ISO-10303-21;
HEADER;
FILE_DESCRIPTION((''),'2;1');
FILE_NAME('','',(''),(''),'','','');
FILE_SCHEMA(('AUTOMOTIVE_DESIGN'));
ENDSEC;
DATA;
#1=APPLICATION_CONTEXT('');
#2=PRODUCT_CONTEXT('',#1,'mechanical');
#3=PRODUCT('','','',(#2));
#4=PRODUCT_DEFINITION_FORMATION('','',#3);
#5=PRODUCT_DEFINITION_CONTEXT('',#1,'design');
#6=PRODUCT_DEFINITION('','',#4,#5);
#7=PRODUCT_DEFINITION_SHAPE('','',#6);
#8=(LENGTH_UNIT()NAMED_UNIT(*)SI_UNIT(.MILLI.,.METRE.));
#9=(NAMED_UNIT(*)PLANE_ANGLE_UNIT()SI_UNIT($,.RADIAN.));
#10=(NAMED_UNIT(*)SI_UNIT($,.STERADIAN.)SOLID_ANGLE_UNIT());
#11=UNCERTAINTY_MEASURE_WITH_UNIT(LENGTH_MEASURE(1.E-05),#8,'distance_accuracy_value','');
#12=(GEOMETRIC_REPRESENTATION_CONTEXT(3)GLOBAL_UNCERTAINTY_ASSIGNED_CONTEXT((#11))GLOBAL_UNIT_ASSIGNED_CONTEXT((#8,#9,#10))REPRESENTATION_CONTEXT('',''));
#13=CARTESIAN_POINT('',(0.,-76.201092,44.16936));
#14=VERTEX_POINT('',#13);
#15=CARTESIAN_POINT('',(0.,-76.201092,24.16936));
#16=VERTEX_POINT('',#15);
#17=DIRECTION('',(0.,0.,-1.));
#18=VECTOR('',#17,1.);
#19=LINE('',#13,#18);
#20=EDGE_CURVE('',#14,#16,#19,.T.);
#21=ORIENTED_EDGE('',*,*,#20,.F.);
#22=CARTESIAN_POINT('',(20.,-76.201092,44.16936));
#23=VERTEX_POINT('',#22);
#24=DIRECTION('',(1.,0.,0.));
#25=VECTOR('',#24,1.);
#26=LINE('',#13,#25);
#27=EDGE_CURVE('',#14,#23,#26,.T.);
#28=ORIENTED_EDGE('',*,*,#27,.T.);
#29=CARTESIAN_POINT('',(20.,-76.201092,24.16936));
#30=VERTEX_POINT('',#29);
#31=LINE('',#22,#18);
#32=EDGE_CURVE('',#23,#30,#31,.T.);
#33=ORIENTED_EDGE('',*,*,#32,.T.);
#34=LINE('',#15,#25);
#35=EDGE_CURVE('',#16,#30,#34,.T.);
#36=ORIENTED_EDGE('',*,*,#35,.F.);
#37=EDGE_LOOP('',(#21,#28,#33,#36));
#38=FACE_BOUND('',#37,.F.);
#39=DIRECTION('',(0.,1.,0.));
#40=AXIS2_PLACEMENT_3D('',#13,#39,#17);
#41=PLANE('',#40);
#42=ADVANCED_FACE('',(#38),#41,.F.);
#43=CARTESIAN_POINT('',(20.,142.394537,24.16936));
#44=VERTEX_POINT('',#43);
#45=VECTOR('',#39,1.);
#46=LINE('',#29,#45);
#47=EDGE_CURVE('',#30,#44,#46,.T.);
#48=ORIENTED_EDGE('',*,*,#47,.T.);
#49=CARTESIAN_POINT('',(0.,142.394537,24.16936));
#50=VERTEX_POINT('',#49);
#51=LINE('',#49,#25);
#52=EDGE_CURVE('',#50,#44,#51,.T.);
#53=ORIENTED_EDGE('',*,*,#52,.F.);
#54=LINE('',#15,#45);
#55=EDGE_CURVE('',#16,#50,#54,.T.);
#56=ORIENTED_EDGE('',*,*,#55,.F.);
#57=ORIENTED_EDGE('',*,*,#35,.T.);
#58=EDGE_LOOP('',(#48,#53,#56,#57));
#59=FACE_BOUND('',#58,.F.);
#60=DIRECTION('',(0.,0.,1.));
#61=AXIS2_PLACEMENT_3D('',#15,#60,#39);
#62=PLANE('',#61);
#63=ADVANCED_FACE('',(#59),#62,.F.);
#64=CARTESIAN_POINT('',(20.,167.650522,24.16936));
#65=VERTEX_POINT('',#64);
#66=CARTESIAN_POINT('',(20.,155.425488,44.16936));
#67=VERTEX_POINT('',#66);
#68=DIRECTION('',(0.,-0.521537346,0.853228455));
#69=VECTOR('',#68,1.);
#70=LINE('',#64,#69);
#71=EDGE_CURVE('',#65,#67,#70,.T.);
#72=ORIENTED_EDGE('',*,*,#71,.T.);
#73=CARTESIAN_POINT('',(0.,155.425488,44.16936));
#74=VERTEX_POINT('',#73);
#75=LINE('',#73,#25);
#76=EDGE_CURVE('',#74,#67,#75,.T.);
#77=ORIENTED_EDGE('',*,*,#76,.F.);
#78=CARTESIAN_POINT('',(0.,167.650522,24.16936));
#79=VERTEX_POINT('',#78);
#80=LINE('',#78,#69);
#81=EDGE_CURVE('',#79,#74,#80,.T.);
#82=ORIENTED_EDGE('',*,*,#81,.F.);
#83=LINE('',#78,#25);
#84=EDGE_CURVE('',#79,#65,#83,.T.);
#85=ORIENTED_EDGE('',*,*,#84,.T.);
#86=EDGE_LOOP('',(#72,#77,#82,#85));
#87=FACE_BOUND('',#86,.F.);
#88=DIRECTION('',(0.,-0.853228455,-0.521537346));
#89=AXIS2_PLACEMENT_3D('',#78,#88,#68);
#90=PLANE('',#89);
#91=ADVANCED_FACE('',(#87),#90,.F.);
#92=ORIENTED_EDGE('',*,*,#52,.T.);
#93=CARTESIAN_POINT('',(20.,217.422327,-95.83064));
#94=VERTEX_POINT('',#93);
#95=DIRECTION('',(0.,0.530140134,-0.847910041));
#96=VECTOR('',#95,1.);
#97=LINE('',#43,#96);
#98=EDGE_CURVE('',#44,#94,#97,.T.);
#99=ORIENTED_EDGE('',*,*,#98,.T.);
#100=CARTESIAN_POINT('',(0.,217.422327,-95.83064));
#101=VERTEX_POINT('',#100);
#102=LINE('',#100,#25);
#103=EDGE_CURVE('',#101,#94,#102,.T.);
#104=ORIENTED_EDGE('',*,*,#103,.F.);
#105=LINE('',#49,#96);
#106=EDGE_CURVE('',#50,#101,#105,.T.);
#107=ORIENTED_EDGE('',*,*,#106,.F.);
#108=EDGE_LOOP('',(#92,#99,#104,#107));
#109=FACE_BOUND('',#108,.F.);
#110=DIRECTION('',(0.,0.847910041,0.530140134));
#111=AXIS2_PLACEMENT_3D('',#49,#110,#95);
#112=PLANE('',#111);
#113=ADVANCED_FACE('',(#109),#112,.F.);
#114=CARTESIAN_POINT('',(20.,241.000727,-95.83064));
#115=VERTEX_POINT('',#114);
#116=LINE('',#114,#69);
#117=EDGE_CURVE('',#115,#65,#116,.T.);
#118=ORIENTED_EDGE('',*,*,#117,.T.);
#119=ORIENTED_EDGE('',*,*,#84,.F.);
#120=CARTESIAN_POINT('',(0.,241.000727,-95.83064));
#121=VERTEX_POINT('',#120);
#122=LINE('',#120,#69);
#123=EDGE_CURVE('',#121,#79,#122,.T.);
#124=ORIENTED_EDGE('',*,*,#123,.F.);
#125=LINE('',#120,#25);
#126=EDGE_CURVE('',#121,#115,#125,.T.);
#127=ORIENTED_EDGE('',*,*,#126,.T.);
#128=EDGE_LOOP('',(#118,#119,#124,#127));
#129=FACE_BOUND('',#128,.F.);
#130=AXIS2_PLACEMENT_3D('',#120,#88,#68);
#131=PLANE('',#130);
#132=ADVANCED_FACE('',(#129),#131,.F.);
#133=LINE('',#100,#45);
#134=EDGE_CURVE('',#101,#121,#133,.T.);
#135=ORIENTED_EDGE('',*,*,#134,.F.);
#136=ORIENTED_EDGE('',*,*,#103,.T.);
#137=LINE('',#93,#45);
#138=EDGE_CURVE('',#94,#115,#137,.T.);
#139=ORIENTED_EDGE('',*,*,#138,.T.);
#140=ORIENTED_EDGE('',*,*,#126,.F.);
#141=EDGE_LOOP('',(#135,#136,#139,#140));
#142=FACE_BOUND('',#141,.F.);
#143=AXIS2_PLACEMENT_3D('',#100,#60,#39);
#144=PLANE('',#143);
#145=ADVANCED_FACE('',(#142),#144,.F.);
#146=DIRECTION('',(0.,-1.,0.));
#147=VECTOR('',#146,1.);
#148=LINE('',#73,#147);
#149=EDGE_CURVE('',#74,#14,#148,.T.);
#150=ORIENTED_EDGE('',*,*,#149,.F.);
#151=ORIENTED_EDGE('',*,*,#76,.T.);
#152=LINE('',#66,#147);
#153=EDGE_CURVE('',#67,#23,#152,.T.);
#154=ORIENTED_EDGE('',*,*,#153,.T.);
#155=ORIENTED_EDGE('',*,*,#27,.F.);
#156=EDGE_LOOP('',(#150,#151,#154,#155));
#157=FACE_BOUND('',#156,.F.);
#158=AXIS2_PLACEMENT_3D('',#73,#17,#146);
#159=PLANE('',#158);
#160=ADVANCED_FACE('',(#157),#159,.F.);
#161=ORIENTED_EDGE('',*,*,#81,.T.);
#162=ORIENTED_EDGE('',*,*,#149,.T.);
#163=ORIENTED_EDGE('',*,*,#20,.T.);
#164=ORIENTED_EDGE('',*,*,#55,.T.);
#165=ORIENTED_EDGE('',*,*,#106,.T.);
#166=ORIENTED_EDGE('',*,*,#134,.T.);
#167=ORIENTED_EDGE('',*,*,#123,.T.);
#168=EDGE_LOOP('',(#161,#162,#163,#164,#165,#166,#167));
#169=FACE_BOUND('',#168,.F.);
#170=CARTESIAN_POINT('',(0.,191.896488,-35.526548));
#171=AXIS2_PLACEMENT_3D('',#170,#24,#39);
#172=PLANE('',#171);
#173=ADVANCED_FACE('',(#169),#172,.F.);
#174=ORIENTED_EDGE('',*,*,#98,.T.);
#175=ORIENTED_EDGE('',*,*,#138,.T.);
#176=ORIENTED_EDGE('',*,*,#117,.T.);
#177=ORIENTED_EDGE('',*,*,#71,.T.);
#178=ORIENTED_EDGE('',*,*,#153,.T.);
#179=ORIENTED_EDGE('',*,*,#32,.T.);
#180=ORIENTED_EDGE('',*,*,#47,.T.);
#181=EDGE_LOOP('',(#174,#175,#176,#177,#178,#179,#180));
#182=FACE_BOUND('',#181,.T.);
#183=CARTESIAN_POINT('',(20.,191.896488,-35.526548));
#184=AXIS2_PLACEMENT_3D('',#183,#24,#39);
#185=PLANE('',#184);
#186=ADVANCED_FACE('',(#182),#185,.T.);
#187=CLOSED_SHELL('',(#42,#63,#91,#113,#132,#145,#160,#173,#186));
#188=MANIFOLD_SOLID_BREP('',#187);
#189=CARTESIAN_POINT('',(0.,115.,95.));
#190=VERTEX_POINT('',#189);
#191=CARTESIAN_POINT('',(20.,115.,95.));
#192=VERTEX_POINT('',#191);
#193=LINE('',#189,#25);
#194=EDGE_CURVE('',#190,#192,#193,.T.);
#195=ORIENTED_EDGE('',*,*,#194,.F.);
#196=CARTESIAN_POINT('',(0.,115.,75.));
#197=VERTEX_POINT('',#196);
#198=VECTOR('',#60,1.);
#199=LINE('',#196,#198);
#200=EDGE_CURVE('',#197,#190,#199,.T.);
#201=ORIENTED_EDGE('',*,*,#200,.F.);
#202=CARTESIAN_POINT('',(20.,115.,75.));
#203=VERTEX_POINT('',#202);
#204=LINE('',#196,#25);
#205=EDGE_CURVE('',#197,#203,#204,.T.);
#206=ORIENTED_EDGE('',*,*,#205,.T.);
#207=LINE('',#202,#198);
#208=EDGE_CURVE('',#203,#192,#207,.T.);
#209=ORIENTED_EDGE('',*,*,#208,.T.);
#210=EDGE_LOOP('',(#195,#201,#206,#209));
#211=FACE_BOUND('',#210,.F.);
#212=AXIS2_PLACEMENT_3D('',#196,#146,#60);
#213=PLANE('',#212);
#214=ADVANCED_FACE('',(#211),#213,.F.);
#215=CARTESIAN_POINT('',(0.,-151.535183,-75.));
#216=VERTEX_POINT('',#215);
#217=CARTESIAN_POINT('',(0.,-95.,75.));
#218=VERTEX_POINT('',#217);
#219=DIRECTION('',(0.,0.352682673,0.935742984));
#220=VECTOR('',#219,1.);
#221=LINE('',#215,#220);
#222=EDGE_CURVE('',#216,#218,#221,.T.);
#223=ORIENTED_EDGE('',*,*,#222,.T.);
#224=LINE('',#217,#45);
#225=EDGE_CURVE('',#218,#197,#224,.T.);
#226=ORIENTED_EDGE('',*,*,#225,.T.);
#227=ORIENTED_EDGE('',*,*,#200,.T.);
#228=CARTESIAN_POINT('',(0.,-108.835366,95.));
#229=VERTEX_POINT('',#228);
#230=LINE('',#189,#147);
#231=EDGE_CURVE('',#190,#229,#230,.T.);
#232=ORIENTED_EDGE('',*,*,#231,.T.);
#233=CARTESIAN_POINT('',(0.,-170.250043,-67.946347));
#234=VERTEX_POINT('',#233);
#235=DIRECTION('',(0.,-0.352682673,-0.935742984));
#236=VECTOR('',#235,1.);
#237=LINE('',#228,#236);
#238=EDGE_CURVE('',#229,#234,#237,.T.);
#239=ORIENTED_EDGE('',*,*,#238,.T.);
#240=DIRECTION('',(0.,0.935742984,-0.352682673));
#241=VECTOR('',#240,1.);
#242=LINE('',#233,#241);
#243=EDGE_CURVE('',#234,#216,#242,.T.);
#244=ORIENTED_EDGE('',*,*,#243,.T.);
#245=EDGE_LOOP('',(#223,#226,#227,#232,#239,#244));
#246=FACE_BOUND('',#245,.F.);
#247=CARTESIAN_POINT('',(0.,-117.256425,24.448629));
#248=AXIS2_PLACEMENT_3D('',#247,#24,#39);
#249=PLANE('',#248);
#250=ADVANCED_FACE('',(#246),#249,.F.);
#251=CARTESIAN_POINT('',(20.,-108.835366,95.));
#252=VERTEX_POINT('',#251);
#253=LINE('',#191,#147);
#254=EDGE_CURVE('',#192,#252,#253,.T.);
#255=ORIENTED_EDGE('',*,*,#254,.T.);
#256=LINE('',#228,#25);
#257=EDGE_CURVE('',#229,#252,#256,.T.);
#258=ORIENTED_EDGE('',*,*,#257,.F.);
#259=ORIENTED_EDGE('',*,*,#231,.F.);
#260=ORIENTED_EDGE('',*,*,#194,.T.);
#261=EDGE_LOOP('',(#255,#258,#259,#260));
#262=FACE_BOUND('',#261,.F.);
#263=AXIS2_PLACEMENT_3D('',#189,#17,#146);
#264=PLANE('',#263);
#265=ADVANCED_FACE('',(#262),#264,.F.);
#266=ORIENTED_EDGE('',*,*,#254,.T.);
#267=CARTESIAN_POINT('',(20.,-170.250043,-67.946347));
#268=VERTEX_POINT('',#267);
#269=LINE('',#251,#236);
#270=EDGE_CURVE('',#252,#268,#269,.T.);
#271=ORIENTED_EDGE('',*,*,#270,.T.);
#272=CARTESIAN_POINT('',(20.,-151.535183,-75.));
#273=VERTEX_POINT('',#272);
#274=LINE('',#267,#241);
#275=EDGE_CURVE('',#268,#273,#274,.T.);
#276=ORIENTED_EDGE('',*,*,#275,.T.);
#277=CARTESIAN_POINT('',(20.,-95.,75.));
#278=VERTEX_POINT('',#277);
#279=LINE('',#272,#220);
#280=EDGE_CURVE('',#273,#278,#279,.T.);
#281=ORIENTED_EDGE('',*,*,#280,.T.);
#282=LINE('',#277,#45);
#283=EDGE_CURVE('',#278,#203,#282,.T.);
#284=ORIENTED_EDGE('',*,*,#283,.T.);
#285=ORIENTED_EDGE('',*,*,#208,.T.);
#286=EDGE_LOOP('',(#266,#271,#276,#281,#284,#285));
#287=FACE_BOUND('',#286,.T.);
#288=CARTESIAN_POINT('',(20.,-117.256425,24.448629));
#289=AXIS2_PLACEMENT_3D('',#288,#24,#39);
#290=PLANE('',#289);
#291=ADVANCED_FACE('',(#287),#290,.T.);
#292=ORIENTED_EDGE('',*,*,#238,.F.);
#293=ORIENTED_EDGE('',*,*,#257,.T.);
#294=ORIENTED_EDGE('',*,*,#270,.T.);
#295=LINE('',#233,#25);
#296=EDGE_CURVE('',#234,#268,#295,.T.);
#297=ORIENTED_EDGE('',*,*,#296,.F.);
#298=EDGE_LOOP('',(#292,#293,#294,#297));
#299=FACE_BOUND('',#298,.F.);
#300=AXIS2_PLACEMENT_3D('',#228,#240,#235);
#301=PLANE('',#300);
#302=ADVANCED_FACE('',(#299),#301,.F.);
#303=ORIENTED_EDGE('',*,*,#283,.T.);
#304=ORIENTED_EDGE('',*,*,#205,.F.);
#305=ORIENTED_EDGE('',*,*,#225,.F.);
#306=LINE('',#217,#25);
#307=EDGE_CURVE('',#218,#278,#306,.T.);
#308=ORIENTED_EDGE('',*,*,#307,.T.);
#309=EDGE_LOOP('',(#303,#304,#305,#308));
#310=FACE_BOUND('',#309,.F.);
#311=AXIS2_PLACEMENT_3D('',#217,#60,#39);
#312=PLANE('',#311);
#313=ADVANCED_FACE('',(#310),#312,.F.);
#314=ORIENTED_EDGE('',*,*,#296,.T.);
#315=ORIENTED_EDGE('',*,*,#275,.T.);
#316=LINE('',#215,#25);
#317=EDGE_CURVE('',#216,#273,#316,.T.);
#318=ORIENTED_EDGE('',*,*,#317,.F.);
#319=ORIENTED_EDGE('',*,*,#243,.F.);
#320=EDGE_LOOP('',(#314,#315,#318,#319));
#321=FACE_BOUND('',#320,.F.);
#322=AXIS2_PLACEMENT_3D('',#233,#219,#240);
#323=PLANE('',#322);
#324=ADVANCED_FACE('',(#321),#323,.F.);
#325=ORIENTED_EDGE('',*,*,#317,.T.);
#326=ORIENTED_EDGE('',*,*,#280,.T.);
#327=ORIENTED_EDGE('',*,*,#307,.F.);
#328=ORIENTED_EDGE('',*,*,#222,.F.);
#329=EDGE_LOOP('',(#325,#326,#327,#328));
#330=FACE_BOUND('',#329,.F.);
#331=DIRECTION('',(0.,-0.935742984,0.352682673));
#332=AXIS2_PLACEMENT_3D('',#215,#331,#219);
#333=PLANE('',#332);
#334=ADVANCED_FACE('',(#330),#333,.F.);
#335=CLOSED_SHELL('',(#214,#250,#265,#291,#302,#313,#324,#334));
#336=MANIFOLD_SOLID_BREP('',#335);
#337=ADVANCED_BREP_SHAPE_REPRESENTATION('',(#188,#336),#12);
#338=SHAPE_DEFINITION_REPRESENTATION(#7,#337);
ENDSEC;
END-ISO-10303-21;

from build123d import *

# Parameters (mm, degrees)
F2_DEPTH = 20
F3_DEPTH = 20


with BuildPart() as f2:
    # F1 (on Right) → F2 (new body)
    with BuildSketch(Plane.YZ):
        Polygon((-151.5351831913, -75), (-95, 75), (-49.1520948708, 75), (-49.1520948708, 95), (-108.8353658587, 95), (-170.2500428688, -67.9463465316), align=None)
        Polygon((-49.1520948708, 95), (-49.1520948708, 75), (95, 75), (115, 75), (115, 95), (95, 95), align=None)
    extrude(amount=F2_DEPTH)


with BuildPart() as f3:
    # F0 (on Right) → F3 (new body)
    with BuildSketch(Plane.YZ):
        Polygon((217.7155762911, -95.8306404948), (241.000726819, -95.8306404948), (167.650522438, 24.1693595052), (142.3945370404, 24.1693595052), (217.4223265664, -95.8306404948), align=None)
        Polygon((142.3945370404, 24.1693595052), (167.650522438, 24.1693595052), (155.4254883744, 44.1693595052), (129.8899054527, 44.1693595052), align=None)
        Polygon((-76.201092194, 24.1693595052), (142.3945370404, 24.1693595052), (129.8899054527, 44.1693595052), (-76.201092194, 44.1693595052), align=None)
    extrude(amount=F3_DEPTH)


solid = Compound([f2.part, f3.part])
